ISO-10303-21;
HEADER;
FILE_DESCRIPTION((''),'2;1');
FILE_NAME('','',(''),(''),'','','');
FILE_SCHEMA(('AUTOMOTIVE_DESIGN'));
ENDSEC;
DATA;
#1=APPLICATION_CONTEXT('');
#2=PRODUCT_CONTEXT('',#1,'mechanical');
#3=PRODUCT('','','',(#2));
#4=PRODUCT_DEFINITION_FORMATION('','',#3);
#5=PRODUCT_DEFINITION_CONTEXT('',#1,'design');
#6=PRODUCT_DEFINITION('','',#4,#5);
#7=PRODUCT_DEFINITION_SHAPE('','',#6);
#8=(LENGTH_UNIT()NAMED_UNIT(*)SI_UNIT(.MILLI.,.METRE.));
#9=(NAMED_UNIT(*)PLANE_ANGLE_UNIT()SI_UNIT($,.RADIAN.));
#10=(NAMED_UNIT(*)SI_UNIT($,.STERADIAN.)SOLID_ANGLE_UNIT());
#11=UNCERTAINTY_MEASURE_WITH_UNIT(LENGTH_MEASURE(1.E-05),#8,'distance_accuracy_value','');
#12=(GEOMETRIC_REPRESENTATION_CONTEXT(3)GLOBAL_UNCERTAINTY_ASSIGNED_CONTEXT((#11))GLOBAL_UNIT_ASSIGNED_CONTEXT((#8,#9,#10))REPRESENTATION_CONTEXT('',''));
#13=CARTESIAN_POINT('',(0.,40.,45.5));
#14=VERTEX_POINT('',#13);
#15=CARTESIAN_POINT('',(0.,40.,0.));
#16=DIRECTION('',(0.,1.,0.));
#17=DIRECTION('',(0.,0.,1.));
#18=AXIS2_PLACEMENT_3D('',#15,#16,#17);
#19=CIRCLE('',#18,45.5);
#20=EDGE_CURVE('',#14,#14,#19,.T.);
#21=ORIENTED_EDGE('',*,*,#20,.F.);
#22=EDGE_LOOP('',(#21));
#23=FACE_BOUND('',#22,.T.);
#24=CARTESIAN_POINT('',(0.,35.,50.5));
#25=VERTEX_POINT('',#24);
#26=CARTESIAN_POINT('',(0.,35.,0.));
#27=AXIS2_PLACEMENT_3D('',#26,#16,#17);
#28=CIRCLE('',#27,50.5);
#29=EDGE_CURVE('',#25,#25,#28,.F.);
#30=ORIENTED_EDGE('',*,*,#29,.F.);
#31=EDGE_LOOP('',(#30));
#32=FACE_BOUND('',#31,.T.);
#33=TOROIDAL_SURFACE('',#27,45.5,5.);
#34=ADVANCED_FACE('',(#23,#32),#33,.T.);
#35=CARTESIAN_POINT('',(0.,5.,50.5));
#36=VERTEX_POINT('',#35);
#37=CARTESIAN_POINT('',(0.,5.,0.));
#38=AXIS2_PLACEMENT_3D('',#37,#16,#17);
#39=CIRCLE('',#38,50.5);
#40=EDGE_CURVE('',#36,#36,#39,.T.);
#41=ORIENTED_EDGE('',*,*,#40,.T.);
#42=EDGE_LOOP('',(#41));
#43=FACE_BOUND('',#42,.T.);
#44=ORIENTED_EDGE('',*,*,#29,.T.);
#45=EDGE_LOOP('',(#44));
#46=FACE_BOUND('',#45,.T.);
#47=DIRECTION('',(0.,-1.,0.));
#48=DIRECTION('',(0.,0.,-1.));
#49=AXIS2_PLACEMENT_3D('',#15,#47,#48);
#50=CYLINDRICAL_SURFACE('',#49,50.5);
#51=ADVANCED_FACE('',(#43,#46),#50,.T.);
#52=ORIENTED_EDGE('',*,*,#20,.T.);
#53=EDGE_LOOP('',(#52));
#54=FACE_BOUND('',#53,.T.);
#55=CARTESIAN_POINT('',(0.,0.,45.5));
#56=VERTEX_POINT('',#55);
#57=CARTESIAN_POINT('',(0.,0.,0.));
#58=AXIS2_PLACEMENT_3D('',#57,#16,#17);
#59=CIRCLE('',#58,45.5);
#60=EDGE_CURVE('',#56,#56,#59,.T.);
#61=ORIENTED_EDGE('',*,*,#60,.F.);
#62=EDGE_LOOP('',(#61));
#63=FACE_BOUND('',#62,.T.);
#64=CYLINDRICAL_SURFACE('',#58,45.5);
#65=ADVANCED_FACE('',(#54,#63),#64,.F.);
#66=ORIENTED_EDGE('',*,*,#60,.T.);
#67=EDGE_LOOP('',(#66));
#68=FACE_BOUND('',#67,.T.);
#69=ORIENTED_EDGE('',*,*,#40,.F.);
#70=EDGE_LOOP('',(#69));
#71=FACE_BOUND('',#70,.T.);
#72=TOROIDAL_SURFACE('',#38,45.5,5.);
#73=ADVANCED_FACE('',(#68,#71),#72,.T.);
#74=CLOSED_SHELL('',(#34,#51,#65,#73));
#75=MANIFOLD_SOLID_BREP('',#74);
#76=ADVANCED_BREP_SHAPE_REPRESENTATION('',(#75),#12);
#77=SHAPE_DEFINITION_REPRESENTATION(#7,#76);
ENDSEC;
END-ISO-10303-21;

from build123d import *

# Parameters (mm, degrees)
SKETCH1_R            = 50.5
SKETCH1_R_2          = 45
SKETCH1_R_3          = 40
BOSS_EXTRUDE1_DEPTH  = 40
FILLET1_R            = 5
FILLET2_R            = 5
CUT_EXTRUDE1_START   = -0.5
SKETCH2_R            = 41.5
SKETCH2_R_2          = 40
CUT_EXTRUDE1_DEPTH   = 0.5
SKETCH3_R            = 1
BOSS_EXTRUDE2_DEPTH  = 5
SKETCH4_R            = 12
BOSS_EXTRUDE3_DEPTH  = 7.5
CUT_EXTRUDE2_DEPTH   = 5
SKETCH6_R            = 6
CUT_EXTRUDE3_DEPTH   = 79.259184829
BOSS_EXTRUDE10_START = -12.5
BOSS_EXTRUDE10_DEPTH = 12.5
CIRPATTERN2_START    = 27
CIRPATTERN2_DEPTH    = 12.5
SKETCH8_R            = 45.5
CUT_EXTRUDE4_DEPTH   = 82.85658196


# Read off the part's stored shape, not the designer's step: Boss-Extrude10, CirPattern2, Cut-Revolve1
with BuildPart() as part:
    # Sketch1 → Boss-Extrude1 (new body)
    # profile 1 of 2: a face of its own
    with BuildSketch(Plane(origin=(0, 0, 0), x_dir=(1, 0, 0), z_dir=(0, 1, 0))):
        with Locations(Location((0, 0, 0), (0, 0, 270))):
            Circle(SKETCH1_R)
        Circle(SKETCH1_R_2, mode=Mode.SUBTRACT)
    # profile 2 of 2: a face of its own
    with BuildSketch(Plane(origin=(0, 0, 0), x_dir=(1, 0, 0), z_dir=(0, 1, 0))):
        Circle(SKETCH1_R_2)
        with Locations(Location((0, 0, 0), (0, 0, 270))):
            Circle(SKETCH1_R_3, mode=Mode.SUBTRACT)
    extrude(amount=BOSS_EXTRUDE1_DEPTH)

    # Fillet1
    fillet1_edges = [part.edges().sort_by_distance(p)[0] for p in [
        (0, 40, -50.5),
    ]]
    fillet(fillet1_edges, radius=FILLET1_R)

    # Fillet2
    fillet2_edges = [part.edges().sort_by_distance(p)[0] for p in [
        (0, 0, -50.5),
    ]]
    fillet(fillet2_edges, radius=FILLET2_R)

    # Sketch2 → Cut-Extrude1 (cut)
    with BuildSketch(Plane(origin=(0, 40, 0), x_dir=(1, 0, 0), z_dir=(0, 1, 0)).offset(CUT_EXTRUDE1_START)):
        with Locations(Location((0, 0, 0), (0, 0, 270))):
            Circle(SKETCH2_R)
        with Locations(Location((0, 0, 0), (0, 0, 270))):
            Circle(SKETCH2_R_2, mode=Mode.SUBTRACT)
    extrude(amount=CUT_EXTRUDE1_DEPTH, mode=Mode.SUBTRACT)


with BuildPart() as body_2:
    # Sketch3 → Boss-Extrude2 (new body)
    with BuildSketch(Plane(origin=(0, 39.5, 0), x_dir=(1, 0, 0), z_dir=(0, 1, 0))):
        with Locations(Location((0, 0, 0), (0, 0, 270))):
            Circle(SKETCH3_R)
    extrude(amount=-BOSS_EXTRUDE2_DEPTH)

    # Sketch4 → Boss-Extrude3 (add)
    with BuildSketch(Plane.XZ.offset(-34.5)):
        with Locations(Location((0, 0, 0), (0, 0, 270))):
            Circle(SKETCH4_R)
    extrude(amount=BOSS_EXTRUDE3_DEPTH)

    # Sketch5 → Cut-Extrude2 (cut)
    with BuildSketch(Plane.XZ.offset(-27)):
        Polygon((1.172923904, 10.937287119), (-8.885506541, 6.484425457), (-10.058430445, -4.452861662), (-1.172923904, -10.937287119), (8.885506541, -6.484425457), (10.058430445, 4.452861662), align=None)
    extrude(amount=-CUT_EXTRUDE2_DEPTH, mode=Mode.SUBTRACT)

    # Sketch6 → Cut-Extrude3 (cut, through all)
    with BuildSketch(Plane.XZ.offset(-32)):
        with Locations(Location((0, 0, 0), (0, 0, 270))):
            Circle(SKETCH6_R)
    extrude(amount=-CUT_EXTRUDE3_DEPTH, mode=Mode.SUBTRACT)

    # Boss-Extrude10 outline → Boss-Extrude10 (add)
    with BuildSketch(Plane(origin=(0, 39.5, 0), x_dir=(1, 0, 0), z_dir=(0, 1, 0)).offset(BOSS_EXTRUDE10_START)):
        with BuildLine():
            ThreePointArc((-9.907874683, -6.770082663), (-10.682049717, -5.467523557), (-11.285904868, -4.077787551))
            ThreePointArc((-11.285904868, -4.077787551), (-11.291897259, -4.637537864), (-11.663342081, -5.056327867))
            Line((-11.663342081, -5.056327867), (-14.441281094, -6.530254709))
            ThreePointArc((-14.441281094, -6.530254709), (-15.188724822, -6.754494743), (-15.965085937, -6.675633223))
            Line((-15.965085937, -6.675633223), (-39.993984407, 0.693693915))
            ThreePointArc((-39.993984407, 0.693693915), (-39.913717484, -2.625863016), (-39.558397626, -5.927324632))
            ThreePointArc((-39.558397626, -5.927324632), (-38.549233859, -3.209595167), (-35.711897206, -2.614628217))
            Line((-35.711897206, -2.614628217), (-16.968675274, -8.362912276))
            ThreePointArc((-16.968675274, -8.362912276), (-16.496554918, -8.752791347), (-16.438401548, -9.362316987))
            Line((-16.438401548, -9.362316987), (-22.186706389, -28.105606681))
            ThreePointArc((-22.186706389, -28.105606681), (-24.270105502, -30.121529322), (-27.086328062, -29.433498469))
            ThreePointArc((-27.086328062, -29.433498469), (-25.333453103, -30.955066692), (-23.495271849, -32.372398749))
            Line((-23.495271849, -32.372398749), (-22.678682838, -32.949618279))
            Line((-22.678682838, -32.949618279), (-21.84791965, -33.506244298))
            Line((-21.84791965, -33.506244298), (-14.474389556, -9.463641401))
            ThreePointArc((-14.474389556, -9.463641401), (-14.104425603, -8.776547206), (-13.499682622, -8.283335601))
            Line((-13.499682622, -8.283335601), (-10.652684086, -6.77276696))
            ThreePointArc((-10.652684086, -6.77276696), (-10.280610826, -6.679459968), (-9.907874683, -6.770082663))
        make_face()
    extrude(amount=BOSS_EXTRUDE10_DEPTH)

    # CirPattern2 outline → CirPattern2 (add)
    with BuildSketch(Plane(origin=(0, 0, 0), x_dir=(1, 0, 0), z_dir=(0, 1, 0)).offset(CIRPATTERN2_START)):
        with BuildLine():
            ThreePointArc((-9.500432888, 7.330878183), (-8.500858804, 8.469675294), (-7.365742824, 9.473427714))
            ThreePointArc((-7.365742824, 9.473427714), (-7.899948758, 9.306154457), (-8.413024481, 9.530006248))
            Line((-8.413024481, 9.530006248), (-10.673242573, 11.716514805))
            ThreePointArc((-10.673242573, 11.716514805), (-11.117480333, 12.358082052), (-11.282387348, 13.120814899))
            Line((-11.282387348, 13.120814899), (-11.699078736, 38.250902692))
            ThreePointArc((-11.699078736, 38.250902692), (-14.831361144, 37.148764806), (-17.861437852, 35.790627793))
            ThreePointArc((-17.861437852, 35.790627793), (-14.964874781, 35.670680608), (-13.522242341, 33.156067994))
            Line((-13.522242341, 33.156067994), (-13.197211247, 13.553887176))
            ThreePointArc((-13.197211247, 13.553887176), (-13.422115065, 12.984394777), (-13.983838017, 12.740733854))
            Line((-13.983838017, 12.740733854), (-33.586089702, 12.415701585))
            ThreePointArc((-33.586089702, 12.415701585), (-36.147151798, 13.774177532), (-36.363056203, 16.665177575))
            ThreePointArc((-36.363056203, 16.665177575), (-37.268485425, 14.527903984), (-38.048419067, 12.341710032))
            Line((-38.048419067, 12.341710032), (-38.345047581, 11.386717087))
            Line((-38.345047581, 11.386717087), (-38.61771044, 10.424607444))
            Line((-38.61771044, 10.424607444), (-13.473290178, 10.841536484))
            ThreePointArc((-13.473290178, 10.841536484), (-12.705499618, 10.70200364), (-12.049551649, 10.279269655))
            Line((-12.049551649, 10.279269655), (-9.733144569, 8.038404527))
            ThreePointArc((-9.733144569, 8.038404527), (-9.529427386, 7.713375274), (-9.500432888, 7.330878183))
        make_face()
        with BuildLine():
            ThreePointArc((4.03628425, 11.300814548), (5.428230042, 10.702070763), (6.73362545, 9.932687868))
            ThreePointArc((6.73362545, 9.932687868), (6.409460418, 10.389057624), (6.463807004, 10.946195641))
            Line((6.463807004, 10.946195641), (7.844854414, 13.771459088))
            ThreePointArc((7.844854414, 13.771459088), (8.317744107, 14.392209487), (8.992187082, 14.784742791))
            Line((8.992187082, 14.784742791), (32.763556111, 22.946664049))
            ThreePointArc((32.763556111, 22.946664049), (30.747432198, 25.585062307), (28.519421945, 28.047149087))
            ThreePointArc((28.519421945, 28.047149087), (29.300432607, 25.255288185), (27.354691835, 23.106205171))
            Line((27.354691835, 23.106205171), (8.812350166, 16.739675231))
            ThreePointArc((8.812350166, 16.739675231), (8.201231607, 16.777588643), (7.795914361, 17.23652355))
            Line((7.795914361, 17.23652355), (1.429361404, 35.778932255))
            ThreePointArc((1.429361404, 35.778932255), (1.929937095, 38.634439204), (4.612723394, 39.733144639))
            ThreePointArc((4.612723394, 39.733144639), (2.300262401, 39.933805139), (-0.019944352, 39.999995028))
            Line((-0.019944352, 39.999995028), (-1.019859867, 39.986996459))
            Line((-1.019859867, 39.986996459), (-2.01913797, 39.949006018))
            Line((-2.01913797, 39.949006018), (6.147438285, 16.164079439))
            ThreePointArc((6.147438285, 16.164079439), (6.251994995, 15.390749203), (6.052650154, 14.636273627))
            Line((6.052650154, 14.636273627), (4.637269925, 11.740774173))
            ThreePointArc((4.637269925, 11.740774173), (4.391100809, 11.446588055), (4.03628425, 11.300814548))
        make_face()
        with BuildLine():
            ThreePointArc((11.994993743, -0.346590692), (11.855689469, -1.855431813), (11.52735222, -3.334689012))
            ThreePointArc((11.52735222, -3.334689012), (11.861213145, -2.885363735), (12.407876906, -2.764885294))
            Line((12.407876906, -2.764885294), (15.521629237, -3.205285014))
            ThreePointArc((15.521629237, -3.205285014), (16.258128901, -3.463207416), (16.839864598, -3.98334134))
            Line((16.839864598, -3.98334134), (31.948070005, -24.069084381))
            ThreePointArc((31.948070005, -24.069084381), (33.834319309, -21.336326696), (35.487409954, -18.45653637))
            ThreePointArc((35.487409954, -18.45653637), (33.073538017, -20.062054114), (30.428371647, -18.875647848))
            Line((30.428371647, -18.875647848), (18.643543171, -3.208198923))
            ThreePointArc((18.643543171, -3.208198923), (18.490754948, -2.615274747), (18.801978065, -2.087976452))
            Line((18.801978065, -2.087976452), (34.469483632, 9.69689463))
            ThreePointArc((34.469483632, 9.69689463), (37.339918519, 10.103219032), (39.213876041, 7.891256292))
            ThreePointArc((39.213876041, 7.891256292), (38.690125771, 10.152544892), (38.036092779, 12.379646445))
            Line((38.036092779, 12.379646445), (37.714739519, 13.326605833))
            Line((37.714739519, 13.326605833), (37.369814547, 14.265236092))
            Line((37.369814547, 14.265236092), (17.272615982, -0.851585994))
            ThreePointArc((17.272615982, -0.851585994), (16.569445022, -1.18999752), (15.790295166, -1.233555084))
            Line((15.790295166, -1.233555084), (12.599134998, -0.782207034))
            ThreePointArc((12.599134998, -0.782207034), (12.243276933, -0.638994801), (11.994993743, -0.346590692))
        make_face()
        with BuildLine():
            ThreePointArc((3.377029578, -11.515019376), (1.89898901, -11.848790687), (0.390670022, -11.99363902))
            ThreePointArc((0.390670022, -11.99363902), (0.921172454, -12.172310482), (1.204682652, -12.654988728))
            Line((1.204682652, -12.654988728), (1.748040016, -15.75243417))
            ThreePointArc((1.748040016, -15.75243417), (1.730332147, -16.53258938), (1.415421606, -17.246583128))
            Line((1.415421606, -17.246583128), (-13.018562973, -37.822176274))
            ThreePointArc((-13.018562973, -37.822176274), (-9.836672879, -38.7716374), (-6.586996421, -39.453915879))
            ThreePointArc((-6.586996421, -39.453915879), (-8.859861984, -37.654319512), (-8.548923935, -34.7719971))
            Line((-8.548923935, -34.7719971), (2.709993184, -18.722451208))
            ThreePointArc((2.709993184, -18.722451208), (3.226683428, -18.393917326), (3.824347139, -18.526963966))
            Line((3.824347139, -18.526963966), (19.873951055, -29.785921788))
            ThreePointArc((19.873951055, -29.785921788), (21.147401687, -32.390306446), (19.62278483, -34.856080037))
            ThreePointArc((19.62278483, -34.856080037), (21.611550355, -33.659187323), (23.527542489, -32.348952756))
            Line((23.527542489, -32.348952756), (24.328850767, -31.7507011))
            Line((24.328850767, -31.7507011), (25.114953513, -31.132605256))
            Line((25.114953513, -31.132605256), (4.527625467, -16.690388528))
            ThreePointArc((4.527625467, -16.690388528), (3.988485204, -16.126208116), (3.706288951, -15.398652596))
            Line((3.706288951, -15.398652596), (3.149423732, -12.224204706))
            ThreePointArc((3.149423732, -12.224204706), (3.17566047, -11.841508561), (3.377029578, -11.515019376))
        make_face()
    extrude(amount=CIRPATTERN2_DEPTH)

    # Cut-Revolve1 outline → Cut-Revolve1 (revolve, cut)
    with BuildSketch(Plane.XY):
        with BuildLine():
            Line((12, 39.5), (12, 34.5))
            add(Edge.make_bspline(
                [(12, 34.5), (18.404764838, 39.5), (40, 39.5)],
                knots=[0, 0, 0, 1, 1, 1], degree=2))
            Line((40, 39.5), (12, 39.5))
        make_face()
    revolve(axis=Axis((0, 0, 0), (0, 1, 0)), mode=Mode.SUBTRACT)


with BuildPart() as cut_extrude4_tool:
    # Sketch8 → Cut-Extrude4 (new, through all)
    with BuildSketch(Plane(origin=(0, 40, 0), x_dir=(1, 0, 0), z_dir=(0, 1, 0))):
        with Locations(Location((0, 0, 0), (0, 0, 270))):
            Circle(SKETCH8_R)
    extrude(amount=-CUT_EXTRUDE4_DEPTH)


with BuildPart() as part_1:
    add(part.part)

    # Cut-Extrude4: cut by cut_extrude4_tool
    add(cut_extrude4_tool.part, mode=Mode.SUBTRACT)


with BuildPart() as body_2_1:
    add(body_2.part)

    # Cut-Extrude4: cut by cut_extrude4_tool
    add(cut_extrude4_tool.part, mode=Mode.SUBTRACT)


solid = part_1.part
